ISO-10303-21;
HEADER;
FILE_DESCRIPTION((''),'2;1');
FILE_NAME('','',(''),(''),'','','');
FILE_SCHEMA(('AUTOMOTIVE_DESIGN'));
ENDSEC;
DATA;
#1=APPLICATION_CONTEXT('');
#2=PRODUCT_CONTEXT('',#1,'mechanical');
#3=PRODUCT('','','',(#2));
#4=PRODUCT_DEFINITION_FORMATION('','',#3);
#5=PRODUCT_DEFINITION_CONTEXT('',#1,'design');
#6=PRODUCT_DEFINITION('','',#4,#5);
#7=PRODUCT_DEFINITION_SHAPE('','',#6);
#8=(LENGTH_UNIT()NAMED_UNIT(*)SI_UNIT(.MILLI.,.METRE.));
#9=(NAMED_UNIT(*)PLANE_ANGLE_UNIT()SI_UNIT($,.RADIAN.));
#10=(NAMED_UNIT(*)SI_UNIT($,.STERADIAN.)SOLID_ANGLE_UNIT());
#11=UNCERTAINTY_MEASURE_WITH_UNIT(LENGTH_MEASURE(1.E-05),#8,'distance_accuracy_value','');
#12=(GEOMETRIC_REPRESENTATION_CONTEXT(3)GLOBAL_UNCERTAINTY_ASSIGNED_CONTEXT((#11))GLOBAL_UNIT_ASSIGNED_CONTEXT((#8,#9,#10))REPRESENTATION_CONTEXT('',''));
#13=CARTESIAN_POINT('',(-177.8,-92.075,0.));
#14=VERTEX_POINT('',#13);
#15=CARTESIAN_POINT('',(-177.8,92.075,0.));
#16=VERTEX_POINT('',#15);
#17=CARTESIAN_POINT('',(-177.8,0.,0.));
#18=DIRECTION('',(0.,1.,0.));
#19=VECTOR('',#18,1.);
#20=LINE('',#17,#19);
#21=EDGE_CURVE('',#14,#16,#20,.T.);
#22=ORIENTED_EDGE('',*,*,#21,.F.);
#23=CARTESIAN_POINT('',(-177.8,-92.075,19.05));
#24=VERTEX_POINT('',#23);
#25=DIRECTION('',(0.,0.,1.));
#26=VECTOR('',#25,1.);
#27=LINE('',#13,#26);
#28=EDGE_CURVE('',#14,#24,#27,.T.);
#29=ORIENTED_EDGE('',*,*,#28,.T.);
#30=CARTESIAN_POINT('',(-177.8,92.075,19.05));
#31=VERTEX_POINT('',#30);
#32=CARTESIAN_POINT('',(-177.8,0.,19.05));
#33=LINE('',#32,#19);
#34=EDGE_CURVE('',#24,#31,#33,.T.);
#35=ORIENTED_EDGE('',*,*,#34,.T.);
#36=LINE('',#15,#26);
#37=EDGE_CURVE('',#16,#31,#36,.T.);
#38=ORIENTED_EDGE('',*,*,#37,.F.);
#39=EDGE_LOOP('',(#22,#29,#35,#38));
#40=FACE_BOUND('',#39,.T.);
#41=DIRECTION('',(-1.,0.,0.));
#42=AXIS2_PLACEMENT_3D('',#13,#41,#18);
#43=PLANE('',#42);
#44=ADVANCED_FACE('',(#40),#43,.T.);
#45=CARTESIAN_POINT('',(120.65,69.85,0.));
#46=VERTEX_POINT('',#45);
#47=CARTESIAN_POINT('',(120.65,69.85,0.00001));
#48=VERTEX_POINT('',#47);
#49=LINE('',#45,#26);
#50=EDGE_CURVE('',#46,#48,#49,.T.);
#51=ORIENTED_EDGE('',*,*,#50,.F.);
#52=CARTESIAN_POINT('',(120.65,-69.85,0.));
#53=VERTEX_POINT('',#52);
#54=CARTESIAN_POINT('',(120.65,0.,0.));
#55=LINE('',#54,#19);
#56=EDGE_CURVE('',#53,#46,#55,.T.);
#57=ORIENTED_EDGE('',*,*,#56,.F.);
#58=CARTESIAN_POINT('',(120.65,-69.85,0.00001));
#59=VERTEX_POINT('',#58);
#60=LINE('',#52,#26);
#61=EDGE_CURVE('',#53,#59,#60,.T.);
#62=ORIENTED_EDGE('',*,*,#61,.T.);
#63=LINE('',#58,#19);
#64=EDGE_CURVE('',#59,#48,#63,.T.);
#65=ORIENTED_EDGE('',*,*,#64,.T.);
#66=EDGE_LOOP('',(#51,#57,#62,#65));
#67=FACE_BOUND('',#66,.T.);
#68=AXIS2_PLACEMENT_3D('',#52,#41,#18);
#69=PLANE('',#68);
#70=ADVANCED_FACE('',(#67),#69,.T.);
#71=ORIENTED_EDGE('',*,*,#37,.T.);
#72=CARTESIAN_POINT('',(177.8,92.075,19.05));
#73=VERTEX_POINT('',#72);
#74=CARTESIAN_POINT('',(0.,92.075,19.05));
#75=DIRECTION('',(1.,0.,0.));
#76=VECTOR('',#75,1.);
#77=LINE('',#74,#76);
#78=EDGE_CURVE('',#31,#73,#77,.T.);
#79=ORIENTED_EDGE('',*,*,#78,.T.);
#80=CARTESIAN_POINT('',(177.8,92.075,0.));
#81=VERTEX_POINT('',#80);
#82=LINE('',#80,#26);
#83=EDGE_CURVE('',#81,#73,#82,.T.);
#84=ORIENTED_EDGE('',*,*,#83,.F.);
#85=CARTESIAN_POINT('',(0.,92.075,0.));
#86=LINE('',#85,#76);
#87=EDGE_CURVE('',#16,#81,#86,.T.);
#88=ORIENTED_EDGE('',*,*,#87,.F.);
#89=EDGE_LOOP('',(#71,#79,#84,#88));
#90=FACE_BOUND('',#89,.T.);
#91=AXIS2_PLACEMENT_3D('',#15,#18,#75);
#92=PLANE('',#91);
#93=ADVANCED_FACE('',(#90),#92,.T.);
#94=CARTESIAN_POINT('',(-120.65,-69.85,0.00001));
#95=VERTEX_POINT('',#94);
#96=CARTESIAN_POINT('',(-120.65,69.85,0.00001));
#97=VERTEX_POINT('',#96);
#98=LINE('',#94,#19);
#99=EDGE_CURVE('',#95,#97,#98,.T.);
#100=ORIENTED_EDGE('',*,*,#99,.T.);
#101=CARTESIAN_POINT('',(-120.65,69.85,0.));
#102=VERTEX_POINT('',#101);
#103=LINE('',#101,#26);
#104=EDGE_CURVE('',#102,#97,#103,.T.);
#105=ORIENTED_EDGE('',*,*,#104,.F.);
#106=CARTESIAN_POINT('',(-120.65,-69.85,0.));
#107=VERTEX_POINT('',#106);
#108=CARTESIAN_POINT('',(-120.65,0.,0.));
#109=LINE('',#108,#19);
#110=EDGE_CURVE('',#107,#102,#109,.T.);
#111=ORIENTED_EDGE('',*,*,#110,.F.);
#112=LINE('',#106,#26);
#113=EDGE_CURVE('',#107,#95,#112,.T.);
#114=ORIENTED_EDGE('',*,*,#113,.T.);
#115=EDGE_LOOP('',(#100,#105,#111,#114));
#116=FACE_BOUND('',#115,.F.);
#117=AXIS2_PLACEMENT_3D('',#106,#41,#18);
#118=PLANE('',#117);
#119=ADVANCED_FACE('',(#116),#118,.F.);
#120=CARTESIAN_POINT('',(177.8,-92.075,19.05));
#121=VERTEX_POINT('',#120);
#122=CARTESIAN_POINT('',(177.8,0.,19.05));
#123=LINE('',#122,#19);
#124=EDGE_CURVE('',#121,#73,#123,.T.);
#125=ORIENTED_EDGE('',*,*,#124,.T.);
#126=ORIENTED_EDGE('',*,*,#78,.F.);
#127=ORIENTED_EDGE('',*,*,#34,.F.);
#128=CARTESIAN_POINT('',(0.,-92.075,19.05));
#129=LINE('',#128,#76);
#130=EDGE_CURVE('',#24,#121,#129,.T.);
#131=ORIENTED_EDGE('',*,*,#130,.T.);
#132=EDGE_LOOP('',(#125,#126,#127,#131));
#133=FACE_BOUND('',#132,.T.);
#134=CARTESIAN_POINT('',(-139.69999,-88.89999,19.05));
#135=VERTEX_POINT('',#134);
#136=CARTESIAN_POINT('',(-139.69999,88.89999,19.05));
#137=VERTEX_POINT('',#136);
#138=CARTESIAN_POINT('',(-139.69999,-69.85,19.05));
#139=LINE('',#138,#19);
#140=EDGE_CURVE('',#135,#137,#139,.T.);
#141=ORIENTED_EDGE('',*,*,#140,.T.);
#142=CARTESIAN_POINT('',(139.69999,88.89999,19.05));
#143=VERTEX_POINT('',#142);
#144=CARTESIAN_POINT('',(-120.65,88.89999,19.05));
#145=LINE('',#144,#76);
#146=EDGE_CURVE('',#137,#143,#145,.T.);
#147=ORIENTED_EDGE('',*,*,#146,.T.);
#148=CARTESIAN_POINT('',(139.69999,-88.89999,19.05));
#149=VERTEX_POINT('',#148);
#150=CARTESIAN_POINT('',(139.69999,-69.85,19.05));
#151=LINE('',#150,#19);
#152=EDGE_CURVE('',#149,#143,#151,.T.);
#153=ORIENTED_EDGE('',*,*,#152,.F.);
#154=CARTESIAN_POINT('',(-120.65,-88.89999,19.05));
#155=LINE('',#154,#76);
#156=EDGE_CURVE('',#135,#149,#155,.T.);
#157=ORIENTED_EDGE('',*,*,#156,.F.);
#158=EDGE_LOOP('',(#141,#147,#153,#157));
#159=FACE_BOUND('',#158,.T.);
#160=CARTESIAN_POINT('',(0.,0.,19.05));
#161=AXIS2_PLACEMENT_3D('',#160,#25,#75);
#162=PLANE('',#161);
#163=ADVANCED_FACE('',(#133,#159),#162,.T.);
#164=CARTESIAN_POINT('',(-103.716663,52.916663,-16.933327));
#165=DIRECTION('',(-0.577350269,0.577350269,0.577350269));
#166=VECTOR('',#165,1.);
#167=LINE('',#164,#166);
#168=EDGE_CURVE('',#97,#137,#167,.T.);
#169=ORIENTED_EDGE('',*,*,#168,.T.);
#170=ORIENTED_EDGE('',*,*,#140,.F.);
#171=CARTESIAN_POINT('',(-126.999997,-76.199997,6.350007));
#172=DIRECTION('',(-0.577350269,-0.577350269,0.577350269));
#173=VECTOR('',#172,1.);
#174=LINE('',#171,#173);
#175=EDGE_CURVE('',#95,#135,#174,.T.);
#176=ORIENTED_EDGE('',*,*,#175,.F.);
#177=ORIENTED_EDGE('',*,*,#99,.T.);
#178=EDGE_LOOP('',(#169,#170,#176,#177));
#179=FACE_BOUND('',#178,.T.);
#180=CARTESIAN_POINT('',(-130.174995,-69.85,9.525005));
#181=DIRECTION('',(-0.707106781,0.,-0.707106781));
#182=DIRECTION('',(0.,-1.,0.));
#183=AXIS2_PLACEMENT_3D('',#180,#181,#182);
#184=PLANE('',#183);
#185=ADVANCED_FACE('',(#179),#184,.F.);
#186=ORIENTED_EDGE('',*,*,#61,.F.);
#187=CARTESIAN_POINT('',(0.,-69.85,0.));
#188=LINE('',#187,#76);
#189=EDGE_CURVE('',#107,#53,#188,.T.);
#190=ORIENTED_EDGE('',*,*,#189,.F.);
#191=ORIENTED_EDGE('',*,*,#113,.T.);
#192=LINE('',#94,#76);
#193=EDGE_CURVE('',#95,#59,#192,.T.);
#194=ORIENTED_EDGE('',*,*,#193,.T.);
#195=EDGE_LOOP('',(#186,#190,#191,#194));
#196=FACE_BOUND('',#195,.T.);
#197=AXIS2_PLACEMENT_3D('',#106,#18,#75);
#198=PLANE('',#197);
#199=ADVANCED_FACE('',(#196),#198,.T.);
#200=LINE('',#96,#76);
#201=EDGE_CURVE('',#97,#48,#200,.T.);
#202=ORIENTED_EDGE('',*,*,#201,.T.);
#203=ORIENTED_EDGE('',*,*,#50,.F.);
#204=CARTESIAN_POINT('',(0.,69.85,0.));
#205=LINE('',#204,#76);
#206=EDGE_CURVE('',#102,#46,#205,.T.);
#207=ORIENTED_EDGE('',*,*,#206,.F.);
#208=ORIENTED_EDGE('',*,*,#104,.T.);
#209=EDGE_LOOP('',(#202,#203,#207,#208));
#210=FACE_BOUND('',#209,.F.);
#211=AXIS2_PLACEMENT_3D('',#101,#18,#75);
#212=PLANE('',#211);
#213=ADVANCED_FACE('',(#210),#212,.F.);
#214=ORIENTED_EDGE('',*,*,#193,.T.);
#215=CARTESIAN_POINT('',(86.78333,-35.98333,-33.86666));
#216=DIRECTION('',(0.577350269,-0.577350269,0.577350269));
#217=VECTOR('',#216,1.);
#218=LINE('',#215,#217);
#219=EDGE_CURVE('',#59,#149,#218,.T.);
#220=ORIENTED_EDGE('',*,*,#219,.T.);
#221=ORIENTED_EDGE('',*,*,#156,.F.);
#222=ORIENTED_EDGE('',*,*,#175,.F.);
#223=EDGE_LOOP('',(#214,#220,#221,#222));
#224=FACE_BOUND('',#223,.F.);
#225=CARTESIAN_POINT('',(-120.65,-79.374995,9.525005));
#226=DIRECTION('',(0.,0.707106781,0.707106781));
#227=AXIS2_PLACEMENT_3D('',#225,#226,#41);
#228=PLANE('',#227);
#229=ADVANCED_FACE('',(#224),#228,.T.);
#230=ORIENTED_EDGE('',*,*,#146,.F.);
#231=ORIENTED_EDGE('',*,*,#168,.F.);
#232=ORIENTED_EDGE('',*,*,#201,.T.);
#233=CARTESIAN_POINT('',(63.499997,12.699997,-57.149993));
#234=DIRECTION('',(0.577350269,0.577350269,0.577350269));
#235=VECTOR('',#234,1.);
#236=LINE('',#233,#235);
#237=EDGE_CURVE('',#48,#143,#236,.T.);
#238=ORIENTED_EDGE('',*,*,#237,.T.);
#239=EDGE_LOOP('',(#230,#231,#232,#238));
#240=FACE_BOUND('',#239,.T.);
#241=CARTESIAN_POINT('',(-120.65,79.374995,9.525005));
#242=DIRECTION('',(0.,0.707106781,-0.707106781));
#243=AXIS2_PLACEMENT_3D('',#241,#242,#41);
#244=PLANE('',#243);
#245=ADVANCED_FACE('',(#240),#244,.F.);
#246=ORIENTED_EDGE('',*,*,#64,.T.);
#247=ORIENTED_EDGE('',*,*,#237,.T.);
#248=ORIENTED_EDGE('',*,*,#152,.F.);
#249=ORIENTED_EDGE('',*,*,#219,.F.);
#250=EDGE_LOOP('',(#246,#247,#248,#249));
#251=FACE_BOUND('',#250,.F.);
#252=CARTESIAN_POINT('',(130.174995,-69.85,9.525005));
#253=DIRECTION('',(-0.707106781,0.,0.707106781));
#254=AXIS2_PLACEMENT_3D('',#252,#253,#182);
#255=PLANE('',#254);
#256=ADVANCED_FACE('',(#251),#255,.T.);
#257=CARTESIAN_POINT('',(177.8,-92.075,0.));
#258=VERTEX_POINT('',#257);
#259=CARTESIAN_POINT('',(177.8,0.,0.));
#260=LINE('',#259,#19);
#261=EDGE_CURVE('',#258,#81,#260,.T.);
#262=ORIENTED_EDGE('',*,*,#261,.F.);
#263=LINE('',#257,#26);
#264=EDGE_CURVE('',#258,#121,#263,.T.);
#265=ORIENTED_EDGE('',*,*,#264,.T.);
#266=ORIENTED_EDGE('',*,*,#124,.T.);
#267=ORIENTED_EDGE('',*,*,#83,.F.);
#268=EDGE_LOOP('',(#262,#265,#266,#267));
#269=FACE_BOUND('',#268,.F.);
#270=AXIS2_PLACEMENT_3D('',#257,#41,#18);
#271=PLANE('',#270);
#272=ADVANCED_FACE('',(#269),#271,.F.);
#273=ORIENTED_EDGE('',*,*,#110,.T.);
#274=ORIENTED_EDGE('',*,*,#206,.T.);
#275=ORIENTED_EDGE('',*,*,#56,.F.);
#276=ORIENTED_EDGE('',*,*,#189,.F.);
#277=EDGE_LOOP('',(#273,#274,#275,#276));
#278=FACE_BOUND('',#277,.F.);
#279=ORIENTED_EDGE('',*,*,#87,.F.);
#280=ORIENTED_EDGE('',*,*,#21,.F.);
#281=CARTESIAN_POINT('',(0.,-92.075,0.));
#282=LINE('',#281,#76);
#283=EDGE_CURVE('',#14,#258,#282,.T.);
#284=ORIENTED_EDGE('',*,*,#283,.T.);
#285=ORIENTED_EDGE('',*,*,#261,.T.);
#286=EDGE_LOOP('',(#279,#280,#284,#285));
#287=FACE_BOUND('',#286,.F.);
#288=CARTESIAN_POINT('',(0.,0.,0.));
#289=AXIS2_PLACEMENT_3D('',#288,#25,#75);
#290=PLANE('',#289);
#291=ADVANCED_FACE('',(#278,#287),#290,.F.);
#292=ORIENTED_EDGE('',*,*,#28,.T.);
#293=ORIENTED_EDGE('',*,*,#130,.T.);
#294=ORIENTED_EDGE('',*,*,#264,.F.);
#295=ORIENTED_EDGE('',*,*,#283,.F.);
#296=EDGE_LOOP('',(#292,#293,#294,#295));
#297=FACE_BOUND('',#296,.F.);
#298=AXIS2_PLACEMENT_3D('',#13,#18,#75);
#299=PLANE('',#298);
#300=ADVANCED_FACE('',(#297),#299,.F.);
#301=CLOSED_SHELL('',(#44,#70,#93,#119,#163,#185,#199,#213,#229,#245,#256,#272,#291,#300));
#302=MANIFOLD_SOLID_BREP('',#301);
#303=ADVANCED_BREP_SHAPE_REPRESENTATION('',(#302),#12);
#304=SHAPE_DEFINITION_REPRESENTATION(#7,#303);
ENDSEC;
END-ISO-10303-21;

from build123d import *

# Parameters (mm, degrees)
F0_W     = 355.6
F0_H     = 184.15
F0_W_2   = 241.3
F0_H_2   = 139.7
F1_DEPTH = 19.05
F2_SIZE  = 19.04999


# Not quite as in the source:
# - a fillet or chamfer is up to 0.001 mm smaller than in the source, because OpenCascade refuses the exact size


with BuildPart() as f1:
    # F0 (on Top) → F1 (new body)
    with BuildSketch(Plane.XY):
        Rectangle(F0_W, F0_H)
        Rectangle(F0_W_2, F0_H_2, mode=Mode.SUBTRACT)
    extrude(amount=F1_DEPTH)

    # F2 (size 19.05 in the source; OpenCascade refuses exactly that, so slightly less here)
    f2_edges = [f1.edges().sort_by_distance(p)[0] for p in [
        (-120.65, 0, 19.05),
        (0, 69.85, 19.05),
        (120.65, 0, 19.05),
        (0, -69.85, 19.05),
    ]]
    chamfer(f2_edges, length=F2_SIZE)


solid = f1.part
